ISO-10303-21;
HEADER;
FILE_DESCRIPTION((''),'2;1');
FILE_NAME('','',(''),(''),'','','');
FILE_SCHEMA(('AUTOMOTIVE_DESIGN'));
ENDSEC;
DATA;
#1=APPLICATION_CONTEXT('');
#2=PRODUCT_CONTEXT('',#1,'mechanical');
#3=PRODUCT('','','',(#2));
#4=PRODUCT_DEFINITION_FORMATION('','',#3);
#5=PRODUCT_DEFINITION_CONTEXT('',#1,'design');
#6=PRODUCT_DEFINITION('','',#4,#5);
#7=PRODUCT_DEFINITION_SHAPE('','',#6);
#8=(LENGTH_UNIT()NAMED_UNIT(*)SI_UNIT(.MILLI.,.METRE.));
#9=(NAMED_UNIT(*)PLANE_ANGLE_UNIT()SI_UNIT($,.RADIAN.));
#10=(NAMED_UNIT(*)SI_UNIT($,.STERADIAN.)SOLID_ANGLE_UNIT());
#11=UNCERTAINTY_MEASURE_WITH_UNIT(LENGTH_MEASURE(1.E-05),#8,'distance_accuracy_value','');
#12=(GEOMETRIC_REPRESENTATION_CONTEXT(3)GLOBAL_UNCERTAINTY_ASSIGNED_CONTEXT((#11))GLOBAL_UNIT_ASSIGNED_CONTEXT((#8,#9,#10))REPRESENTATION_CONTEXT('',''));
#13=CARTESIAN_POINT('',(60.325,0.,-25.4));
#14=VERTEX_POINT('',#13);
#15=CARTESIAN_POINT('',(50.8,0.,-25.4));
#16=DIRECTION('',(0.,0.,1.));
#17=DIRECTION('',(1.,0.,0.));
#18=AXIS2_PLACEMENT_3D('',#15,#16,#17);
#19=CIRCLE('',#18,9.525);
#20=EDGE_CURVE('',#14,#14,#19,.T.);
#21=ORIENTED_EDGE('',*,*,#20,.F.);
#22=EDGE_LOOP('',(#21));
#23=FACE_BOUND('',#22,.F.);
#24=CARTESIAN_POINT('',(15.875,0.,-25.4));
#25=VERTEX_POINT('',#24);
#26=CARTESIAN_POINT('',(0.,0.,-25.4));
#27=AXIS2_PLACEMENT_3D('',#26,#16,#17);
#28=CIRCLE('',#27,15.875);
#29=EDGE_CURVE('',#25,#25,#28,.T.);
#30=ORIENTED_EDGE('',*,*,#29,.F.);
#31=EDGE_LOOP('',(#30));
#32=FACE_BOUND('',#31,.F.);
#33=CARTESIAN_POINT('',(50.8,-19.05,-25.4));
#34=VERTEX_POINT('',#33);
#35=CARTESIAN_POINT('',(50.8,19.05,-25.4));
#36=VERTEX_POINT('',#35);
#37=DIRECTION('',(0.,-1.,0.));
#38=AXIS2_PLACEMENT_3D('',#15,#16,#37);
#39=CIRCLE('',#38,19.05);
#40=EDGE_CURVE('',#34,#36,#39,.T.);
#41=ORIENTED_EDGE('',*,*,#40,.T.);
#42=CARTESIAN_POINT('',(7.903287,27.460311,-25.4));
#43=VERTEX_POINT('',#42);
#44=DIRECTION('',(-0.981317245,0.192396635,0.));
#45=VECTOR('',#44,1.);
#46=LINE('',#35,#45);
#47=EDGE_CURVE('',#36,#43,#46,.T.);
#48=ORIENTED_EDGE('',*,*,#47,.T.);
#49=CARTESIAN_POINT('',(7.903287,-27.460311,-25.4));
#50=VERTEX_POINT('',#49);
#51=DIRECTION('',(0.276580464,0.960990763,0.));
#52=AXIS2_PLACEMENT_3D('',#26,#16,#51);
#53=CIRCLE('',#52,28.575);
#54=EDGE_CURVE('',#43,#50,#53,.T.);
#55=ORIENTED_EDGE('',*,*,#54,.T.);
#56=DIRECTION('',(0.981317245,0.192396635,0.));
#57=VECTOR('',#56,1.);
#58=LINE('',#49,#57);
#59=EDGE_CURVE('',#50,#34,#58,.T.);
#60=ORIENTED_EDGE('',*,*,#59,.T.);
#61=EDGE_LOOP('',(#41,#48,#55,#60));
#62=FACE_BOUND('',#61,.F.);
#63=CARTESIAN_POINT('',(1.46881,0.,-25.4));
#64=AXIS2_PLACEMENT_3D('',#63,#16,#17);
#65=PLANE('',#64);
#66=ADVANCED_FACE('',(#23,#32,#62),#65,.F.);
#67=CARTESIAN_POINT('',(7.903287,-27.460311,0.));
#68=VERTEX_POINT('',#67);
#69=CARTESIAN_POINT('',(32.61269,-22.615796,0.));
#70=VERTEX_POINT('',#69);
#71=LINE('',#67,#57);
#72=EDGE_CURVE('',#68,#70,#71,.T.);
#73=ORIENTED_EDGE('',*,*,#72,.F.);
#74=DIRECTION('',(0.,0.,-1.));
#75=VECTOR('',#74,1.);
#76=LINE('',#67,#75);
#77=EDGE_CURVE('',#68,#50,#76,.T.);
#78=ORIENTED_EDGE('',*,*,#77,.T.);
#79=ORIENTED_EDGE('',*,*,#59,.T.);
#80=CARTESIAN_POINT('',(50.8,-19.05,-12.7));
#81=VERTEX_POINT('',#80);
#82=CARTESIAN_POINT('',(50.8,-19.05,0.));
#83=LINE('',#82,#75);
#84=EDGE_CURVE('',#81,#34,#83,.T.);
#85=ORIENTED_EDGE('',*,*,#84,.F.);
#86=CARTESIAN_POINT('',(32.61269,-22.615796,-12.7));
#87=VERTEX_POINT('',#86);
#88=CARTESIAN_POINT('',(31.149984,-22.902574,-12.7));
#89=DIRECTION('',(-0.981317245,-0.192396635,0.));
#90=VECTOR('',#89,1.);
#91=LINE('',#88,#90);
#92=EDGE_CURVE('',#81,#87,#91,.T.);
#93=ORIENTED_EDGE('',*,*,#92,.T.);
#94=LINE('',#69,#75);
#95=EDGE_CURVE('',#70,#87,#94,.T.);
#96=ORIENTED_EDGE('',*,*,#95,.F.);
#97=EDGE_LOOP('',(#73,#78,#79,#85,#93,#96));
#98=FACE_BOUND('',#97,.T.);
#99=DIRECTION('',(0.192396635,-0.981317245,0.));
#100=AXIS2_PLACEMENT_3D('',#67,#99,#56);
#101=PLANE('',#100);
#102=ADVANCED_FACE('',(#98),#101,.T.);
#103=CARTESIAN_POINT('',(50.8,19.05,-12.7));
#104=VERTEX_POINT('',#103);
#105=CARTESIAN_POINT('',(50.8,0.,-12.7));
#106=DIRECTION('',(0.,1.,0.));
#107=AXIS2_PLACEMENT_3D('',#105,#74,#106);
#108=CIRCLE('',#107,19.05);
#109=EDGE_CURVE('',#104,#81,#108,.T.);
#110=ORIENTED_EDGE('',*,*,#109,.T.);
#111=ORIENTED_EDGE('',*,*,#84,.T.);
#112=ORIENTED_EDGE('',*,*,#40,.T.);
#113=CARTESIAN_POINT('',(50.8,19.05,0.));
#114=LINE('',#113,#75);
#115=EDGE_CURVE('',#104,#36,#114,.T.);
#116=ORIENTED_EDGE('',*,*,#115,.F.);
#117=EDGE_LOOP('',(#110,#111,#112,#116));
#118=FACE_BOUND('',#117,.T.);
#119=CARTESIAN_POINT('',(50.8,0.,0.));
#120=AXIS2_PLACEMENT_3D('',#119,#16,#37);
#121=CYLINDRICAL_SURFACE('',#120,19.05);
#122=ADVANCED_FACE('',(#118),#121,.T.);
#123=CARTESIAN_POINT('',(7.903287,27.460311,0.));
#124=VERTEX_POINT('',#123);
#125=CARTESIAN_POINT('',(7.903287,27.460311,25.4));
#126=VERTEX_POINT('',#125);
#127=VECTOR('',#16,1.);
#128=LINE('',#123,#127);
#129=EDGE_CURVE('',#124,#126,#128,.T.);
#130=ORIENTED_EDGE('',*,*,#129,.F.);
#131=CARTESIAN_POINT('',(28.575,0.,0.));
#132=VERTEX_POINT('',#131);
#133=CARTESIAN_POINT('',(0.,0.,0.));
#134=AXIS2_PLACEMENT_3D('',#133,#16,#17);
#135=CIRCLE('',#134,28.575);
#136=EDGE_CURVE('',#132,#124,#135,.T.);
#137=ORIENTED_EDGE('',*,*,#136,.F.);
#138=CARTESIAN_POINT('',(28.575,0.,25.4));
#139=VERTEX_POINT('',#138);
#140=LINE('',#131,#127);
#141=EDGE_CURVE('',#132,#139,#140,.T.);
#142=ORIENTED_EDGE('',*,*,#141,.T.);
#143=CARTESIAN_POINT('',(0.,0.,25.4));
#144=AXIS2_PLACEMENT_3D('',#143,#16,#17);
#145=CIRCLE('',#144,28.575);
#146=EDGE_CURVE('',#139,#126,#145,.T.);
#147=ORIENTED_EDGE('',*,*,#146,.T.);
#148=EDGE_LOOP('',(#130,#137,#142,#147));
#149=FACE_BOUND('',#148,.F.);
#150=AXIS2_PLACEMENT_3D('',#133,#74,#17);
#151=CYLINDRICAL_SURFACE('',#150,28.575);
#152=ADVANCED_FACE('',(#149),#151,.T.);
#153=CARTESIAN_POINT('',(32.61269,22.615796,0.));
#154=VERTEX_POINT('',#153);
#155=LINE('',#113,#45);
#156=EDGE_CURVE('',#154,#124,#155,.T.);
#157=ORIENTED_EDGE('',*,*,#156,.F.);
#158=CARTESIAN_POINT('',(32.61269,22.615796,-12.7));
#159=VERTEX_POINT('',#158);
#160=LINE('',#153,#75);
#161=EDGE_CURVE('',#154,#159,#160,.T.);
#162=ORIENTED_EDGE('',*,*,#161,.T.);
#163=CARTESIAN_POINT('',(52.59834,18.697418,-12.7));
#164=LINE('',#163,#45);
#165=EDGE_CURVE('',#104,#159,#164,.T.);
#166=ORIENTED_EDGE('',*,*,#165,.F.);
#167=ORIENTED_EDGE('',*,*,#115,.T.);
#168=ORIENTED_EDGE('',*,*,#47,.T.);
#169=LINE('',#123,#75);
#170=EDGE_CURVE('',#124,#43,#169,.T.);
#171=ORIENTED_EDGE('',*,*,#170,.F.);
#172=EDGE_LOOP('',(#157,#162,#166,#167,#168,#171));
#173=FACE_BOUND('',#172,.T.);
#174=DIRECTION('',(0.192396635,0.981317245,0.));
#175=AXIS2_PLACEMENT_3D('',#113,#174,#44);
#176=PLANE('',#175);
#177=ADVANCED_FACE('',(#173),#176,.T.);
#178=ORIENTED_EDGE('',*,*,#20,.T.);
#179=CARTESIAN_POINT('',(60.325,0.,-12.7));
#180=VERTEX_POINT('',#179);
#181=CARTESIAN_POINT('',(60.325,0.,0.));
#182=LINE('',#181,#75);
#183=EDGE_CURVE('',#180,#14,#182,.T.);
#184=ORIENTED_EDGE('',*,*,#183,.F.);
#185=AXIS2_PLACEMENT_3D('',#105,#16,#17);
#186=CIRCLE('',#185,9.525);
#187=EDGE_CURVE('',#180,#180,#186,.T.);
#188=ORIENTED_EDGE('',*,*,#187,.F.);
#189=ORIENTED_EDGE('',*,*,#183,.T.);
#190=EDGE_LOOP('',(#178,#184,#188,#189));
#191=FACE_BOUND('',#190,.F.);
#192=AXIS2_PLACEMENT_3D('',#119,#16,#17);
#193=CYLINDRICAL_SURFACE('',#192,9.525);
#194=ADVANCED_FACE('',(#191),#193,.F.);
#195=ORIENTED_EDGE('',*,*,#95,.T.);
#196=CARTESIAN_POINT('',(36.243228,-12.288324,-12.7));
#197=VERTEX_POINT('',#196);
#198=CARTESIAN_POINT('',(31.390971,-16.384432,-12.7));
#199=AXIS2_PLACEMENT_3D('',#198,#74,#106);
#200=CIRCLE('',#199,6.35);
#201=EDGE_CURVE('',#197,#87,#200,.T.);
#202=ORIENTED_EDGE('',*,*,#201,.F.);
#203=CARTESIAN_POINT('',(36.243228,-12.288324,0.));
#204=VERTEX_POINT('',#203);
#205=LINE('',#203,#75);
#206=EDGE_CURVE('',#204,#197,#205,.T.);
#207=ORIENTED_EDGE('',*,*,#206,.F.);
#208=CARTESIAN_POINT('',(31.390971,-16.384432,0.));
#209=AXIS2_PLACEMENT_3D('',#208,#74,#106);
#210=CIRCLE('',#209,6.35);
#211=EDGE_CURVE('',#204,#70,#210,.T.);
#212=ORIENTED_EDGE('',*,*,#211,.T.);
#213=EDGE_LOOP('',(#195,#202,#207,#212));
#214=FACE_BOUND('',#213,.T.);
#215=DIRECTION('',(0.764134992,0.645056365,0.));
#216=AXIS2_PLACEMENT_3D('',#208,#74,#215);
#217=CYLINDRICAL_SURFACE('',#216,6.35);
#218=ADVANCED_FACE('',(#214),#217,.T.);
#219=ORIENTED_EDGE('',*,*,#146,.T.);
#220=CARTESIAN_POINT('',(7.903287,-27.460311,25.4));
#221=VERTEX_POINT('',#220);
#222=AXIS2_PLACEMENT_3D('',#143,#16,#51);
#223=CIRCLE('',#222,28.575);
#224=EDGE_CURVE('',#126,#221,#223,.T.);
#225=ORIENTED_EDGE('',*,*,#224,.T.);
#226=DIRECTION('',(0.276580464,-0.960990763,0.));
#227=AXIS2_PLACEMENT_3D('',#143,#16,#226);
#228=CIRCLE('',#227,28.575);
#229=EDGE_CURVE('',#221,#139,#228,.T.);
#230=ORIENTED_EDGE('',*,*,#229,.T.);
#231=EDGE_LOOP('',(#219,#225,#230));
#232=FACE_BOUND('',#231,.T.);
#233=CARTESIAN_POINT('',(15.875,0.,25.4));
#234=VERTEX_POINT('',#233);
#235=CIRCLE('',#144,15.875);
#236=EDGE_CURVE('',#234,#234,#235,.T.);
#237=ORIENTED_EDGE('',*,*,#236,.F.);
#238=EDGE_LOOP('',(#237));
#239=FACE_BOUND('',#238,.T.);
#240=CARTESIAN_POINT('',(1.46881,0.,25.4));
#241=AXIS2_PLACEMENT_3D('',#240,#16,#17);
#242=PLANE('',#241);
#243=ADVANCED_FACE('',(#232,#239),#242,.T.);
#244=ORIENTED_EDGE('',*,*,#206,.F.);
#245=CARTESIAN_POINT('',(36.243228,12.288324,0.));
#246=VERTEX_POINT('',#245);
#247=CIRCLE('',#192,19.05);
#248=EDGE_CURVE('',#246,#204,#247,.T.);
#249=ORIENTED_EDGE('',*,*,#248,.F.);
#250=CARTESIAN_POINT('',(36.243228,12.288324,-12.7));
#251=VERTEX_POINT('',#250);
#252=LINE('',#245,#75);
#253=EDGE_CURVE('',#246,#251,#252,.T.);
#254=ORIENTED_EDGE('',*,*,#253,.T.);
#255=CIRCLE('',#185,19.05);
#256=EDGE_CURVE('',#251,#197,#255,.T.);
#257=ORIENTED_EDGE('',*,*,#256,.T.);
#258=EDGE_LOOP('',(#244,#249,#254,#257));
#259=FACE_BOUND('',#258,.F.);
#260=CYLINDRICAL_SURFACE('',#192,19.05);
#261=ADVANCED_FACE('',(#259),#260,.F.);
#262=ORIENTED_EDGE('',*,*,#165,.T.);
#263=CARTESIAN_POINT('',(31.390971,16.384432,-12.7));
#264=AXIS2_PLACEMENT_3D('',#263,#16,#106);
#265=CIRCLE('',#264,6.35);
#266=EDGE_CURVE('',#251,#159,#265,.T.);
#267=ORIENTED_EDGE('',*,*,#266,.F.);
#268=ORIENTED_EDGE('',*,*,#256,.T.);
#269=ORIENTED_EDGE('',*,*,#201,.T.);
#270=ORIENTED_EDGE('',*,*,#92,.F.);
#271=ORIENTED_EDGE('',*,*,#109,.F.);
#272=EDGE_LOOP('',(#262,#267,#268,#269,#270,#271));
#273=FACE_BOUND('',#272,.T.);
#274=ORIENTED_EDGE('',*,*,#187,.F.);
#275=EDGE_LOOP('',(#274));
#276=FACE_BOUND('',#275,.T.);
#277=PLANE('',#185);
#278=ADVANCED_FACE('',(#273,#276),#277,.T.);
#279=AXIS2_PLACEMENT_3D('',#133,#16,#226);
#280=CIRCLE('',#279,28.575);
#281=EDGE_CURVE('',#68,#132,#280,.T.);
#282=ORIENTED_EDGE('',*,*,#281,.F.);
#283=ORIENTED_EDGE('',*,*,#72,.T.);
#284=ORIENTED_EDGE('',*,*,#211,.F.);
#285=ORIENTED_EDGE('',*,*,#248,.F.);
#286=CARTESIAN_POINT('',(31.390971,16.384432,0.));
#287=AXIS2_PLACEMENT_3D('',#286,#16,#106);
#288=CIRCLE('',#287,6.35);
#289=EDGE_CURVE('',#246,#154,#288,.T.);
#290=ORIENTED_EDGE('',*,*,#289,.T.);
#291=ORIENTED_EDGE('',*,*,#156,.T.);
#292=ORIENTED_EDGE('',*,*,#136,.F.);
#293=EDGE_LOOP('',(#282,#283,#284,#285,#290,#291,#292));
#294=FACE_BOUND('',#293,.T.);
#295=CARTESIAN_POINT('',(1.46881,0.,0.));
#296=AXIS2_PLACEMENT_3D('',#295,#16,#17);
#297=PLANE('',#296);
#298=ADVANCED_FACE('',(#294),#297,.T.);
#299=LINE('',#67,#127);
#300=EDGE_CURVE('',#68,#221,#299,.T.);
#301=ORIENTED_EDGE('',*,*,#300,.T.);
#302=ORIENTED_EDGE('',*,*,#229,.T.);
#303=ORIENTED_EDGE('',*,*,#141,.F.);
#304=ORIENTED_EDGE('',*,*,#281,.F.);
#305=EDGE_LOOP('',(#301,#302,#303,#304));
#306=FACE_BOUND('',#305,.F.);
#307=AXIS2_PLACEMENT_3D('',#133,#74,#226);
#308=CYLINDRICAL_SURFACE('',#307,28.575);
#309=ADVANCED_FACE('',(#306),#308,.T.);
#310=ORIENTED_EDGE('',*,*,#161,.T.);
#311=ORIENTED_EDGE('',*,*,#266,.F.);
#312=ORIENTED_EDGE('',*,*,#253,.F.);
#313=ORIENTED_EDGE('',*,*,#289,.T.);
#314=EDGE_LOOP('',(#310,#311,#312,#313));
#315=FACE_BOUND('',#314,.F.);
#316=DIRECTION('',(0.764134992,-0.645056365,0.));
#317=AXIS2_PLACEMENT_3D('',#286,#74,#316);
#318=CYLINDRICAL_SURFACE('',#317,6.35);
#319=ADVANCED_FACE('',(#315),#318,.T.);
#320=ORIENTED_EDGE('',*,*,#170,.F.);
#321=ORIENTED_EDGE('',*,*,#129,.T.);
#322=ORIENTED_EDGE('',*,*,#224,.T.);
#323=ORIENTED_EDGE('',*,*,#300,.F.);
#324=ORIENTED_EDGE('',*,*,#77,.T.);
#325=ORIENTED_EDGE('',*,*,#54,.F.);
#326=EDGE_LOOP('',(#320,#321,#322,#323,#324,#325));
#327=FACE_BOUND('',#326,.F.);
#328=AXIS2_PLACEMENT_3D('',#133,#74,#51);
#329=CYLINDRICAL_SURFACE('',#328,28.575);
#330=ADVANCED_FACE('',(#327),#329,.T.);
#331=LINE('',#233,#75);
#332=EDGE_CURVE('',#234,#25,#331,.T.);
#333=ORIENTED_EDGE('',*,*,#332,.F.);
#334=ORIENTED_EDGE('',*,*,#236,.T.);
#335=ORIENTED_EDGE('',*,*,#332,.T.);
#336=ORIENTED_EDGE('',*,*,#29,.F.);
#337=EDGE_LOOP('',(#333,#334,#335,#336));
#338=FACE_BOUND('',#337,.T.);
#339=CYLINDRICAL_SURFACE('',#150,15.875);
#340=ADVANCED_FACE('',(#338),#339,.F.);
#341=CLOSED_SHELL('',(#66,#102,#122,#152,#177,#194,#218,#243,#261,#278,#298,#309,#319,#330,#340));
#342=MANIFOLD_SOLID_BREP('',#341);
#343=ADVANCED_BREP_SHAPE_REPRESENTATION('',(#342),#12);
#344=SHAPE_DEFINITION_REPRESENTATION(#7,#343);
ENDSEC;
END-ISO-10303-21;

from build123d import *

# Parameters (mm, degrees)
F0_R     = 15.875
F0_R_2   = 9.525
F1_DEPTH = 25.4
F2_DEPTH = 25.4
F3_DEPTH = 12.7
F4_R     = 6.35


with BuildPart() as f1:
    # F0 (on Top) → F1 (new body)
    with BuildSketch(Plane.XY):
        with BuildLine():
            ThreePointArc((7.9032867525, -27.4603110599), (22.829444189, -17.1856656264), (28.575, 0))
            ThreePointArc((28.575, 0), (22.829444189, 17.1856656264), (7.9032867525, 27.4603110599))
            ThreePointArc((7.9032867525, 27.4603110599), (-28.575, 0), (7.9032867525, -27.4603110599))
        make_face()
        Circle(F0_R, mode=Mode.SUBTRACT)
        with BuildLine():
            ThreePointArc((7.9032867525, 27.4603110599), (22.829444189, 17.1856656264), (28.575, 0))
            ThreePointArc((28.575, 0), (22.829444189, -17.1856656264), (7.9032867525, -27.4603110599))
            Line((7.9032867525, -27.4603110599), (50.8, -19.05))
            ThreePointArc((50.8, -19.05), (31.75, 0), (50.8, 19.05))
            Line((50.8, 19.05), (7.9032867525, 27.4603110599))
        make_face()
        with BuildLine():
            ThreePointArc((69.85, 0), (64.2703841816, 13.4703841816), (50.8, 19.05))
            ThreePointArc((50.8, 19.05), (31.75, 0), (50.8, -19.05))
            ThreePointArc((50.8, -19.05), (64.2703841816, -13.4703841816), (69.85, 0))
        make_face()
        with Locations((50.8, 0)):
            Circle(F0_R_2, mode=Mode.SUBTRACT)
    extrude(amount=-F1_DEPTH)

    # F0 (on Top) → F2 (join)
    with BuildSketch(Plane.XY):
        with BuildLine():
            ThreePointArc((7.9032867525, -27.4603110599), (22.829444189, -17.1856656264), (28.575, 0))
            ThreePointArc((28.575, 0), (22.829444189, 17.1856656264), (7.9032867525, 27.4603110599))
            ThreePointArc((7.9032867525, 27.4603110599), (-28.575, 0), (7.9032867525, -27.4603110599))
        make_face()
        Circle(F0_R, mode=Mode.SUBTRACT)
    extrude(amount=F2_DEPTH)

    # F0 (on Top) → F3 (cut)
    with BuildSketch(Plane.XY):
        with BuildLine():
            ThreePointArc((69.85, 0), (64.2703841816, 13.4703841816), (50.8, 19.05))
            ThreePointArc((50.8, 19.05), (31.75, 0), (50.8, -19.05))
            ThreePointArc((50.8, -19.05), (64.2703841816, -13.4703841816), (69.85, 0))
        make_face()
        with Locations((50.8, 0)):
            Circle(F0_R_2, mode=Mode.SUBTRACT)
    extrude(amount=-F3_DEPTH, mode=Mode.SUBTRACT)

    # F4
    f4_edges = [f1.edges().sort_by_distance(p)[0] for p in [
        (50.8, 19.05, -6.35),
        (50.8, -19.05, -6.35),
    ]]
    fillet(f4_edges, radius=F4_R)


solid = f1.part
